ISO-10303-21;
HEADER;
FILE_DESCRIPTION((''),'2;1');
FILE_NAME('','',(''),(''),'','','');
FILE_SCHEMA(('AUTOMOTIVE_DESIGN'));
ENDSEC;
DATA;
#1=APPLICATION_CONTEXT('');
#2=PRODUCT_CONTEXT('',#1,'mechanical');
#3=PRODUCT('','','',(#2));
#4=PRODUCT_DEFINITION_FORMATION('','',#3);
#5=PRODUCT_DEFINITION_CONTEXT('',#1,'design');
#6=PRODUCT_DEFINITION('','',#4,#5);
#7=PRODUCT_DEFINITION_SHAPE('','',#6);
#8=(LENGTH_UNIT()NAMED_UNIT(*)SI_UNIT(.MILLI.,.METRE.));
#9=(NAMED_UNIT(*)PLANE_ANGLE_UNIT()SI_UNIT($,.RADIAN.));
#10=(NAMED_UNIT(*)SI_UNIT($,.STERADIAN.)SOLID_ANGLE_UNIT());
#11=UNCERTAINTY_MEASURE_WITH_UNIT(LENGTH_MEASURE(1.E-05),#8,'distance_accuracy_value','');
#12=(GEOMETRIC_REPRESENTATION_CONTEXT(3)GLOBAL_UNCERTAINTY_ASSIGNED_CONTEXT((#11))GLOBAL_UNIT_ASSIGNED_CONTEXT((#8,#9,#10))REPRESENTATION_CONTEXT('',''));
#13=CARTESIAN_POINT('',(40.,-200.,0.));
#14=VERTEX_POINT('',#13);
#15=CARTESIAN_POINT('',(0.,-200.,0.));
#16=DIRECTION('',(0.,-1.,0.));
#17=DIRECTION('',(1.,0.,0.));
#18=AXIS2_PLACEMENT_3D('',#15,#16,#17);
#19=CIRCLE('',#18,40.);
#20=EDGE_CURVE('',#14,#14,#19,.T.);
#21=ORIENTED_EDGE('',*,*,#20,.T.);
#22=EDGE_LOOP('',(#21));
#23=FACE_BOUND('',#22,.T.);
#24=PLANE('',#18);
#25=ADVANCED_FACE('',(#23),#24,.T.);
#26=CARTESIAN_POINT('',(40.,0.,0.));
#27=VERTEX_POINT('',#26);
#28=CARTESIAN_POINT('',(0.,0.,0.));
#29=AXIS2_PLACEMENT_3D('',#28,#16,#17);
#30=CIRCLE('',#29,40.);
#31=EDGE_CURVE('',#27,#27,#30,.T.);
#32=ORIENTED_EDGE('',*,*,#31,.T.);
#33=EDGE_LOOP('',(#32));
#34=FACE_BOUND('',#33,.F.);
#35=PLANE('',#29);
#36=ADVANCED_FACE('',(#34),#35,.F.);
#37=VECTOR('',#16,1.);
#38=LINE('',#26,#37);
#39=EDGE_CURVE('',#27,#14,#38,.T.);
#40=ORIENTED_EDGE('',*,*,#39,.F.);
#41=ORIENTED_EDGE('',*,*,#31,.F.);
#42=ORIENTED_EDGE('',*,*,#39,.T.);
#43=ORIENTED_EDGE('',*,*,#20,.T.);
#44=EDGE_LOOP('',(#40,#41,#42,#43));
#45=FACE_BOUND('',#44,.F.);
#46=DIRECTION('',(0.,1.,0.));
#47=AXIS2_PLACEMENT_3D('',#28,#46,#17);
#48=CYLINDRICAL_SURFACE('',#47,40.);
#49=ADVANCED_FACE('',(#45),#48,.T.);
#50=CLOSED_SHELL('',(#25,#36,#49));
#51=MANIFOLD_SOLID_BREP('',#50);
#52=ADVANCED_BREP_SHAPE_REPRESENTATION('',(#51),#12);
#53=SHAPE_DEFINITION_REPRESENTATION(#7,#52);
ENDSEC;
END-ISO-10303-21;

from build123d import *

# Parameters (mm, degrees)
F0_R     = 40
F1_DEPTH = 200
F2_R     = 40
F2_R_2   = 27.5
F3_DEPTH = 200


# Not quite as in the source:
# - a feature names something its author has since deleted; it is built from what else it names


with BuildPart() as f1:
    # F0 (on Front) → F1 (new body)
    with BuildSketch(Plane.XZ):
        Circle(F0_R)
    extrude(amount=F1_DEPTH)

    # F2 (on face) → F3 (join)
    with BuildSketch(Plane.XZ.offset(200)):
        Circle(F2_R)
        Circle(F2_R_2, mode=Mode.SUBTRACT)
        Circle(F2_R_2)
    extrude(amount=-F3_DEPTH)


solid = f1.part
